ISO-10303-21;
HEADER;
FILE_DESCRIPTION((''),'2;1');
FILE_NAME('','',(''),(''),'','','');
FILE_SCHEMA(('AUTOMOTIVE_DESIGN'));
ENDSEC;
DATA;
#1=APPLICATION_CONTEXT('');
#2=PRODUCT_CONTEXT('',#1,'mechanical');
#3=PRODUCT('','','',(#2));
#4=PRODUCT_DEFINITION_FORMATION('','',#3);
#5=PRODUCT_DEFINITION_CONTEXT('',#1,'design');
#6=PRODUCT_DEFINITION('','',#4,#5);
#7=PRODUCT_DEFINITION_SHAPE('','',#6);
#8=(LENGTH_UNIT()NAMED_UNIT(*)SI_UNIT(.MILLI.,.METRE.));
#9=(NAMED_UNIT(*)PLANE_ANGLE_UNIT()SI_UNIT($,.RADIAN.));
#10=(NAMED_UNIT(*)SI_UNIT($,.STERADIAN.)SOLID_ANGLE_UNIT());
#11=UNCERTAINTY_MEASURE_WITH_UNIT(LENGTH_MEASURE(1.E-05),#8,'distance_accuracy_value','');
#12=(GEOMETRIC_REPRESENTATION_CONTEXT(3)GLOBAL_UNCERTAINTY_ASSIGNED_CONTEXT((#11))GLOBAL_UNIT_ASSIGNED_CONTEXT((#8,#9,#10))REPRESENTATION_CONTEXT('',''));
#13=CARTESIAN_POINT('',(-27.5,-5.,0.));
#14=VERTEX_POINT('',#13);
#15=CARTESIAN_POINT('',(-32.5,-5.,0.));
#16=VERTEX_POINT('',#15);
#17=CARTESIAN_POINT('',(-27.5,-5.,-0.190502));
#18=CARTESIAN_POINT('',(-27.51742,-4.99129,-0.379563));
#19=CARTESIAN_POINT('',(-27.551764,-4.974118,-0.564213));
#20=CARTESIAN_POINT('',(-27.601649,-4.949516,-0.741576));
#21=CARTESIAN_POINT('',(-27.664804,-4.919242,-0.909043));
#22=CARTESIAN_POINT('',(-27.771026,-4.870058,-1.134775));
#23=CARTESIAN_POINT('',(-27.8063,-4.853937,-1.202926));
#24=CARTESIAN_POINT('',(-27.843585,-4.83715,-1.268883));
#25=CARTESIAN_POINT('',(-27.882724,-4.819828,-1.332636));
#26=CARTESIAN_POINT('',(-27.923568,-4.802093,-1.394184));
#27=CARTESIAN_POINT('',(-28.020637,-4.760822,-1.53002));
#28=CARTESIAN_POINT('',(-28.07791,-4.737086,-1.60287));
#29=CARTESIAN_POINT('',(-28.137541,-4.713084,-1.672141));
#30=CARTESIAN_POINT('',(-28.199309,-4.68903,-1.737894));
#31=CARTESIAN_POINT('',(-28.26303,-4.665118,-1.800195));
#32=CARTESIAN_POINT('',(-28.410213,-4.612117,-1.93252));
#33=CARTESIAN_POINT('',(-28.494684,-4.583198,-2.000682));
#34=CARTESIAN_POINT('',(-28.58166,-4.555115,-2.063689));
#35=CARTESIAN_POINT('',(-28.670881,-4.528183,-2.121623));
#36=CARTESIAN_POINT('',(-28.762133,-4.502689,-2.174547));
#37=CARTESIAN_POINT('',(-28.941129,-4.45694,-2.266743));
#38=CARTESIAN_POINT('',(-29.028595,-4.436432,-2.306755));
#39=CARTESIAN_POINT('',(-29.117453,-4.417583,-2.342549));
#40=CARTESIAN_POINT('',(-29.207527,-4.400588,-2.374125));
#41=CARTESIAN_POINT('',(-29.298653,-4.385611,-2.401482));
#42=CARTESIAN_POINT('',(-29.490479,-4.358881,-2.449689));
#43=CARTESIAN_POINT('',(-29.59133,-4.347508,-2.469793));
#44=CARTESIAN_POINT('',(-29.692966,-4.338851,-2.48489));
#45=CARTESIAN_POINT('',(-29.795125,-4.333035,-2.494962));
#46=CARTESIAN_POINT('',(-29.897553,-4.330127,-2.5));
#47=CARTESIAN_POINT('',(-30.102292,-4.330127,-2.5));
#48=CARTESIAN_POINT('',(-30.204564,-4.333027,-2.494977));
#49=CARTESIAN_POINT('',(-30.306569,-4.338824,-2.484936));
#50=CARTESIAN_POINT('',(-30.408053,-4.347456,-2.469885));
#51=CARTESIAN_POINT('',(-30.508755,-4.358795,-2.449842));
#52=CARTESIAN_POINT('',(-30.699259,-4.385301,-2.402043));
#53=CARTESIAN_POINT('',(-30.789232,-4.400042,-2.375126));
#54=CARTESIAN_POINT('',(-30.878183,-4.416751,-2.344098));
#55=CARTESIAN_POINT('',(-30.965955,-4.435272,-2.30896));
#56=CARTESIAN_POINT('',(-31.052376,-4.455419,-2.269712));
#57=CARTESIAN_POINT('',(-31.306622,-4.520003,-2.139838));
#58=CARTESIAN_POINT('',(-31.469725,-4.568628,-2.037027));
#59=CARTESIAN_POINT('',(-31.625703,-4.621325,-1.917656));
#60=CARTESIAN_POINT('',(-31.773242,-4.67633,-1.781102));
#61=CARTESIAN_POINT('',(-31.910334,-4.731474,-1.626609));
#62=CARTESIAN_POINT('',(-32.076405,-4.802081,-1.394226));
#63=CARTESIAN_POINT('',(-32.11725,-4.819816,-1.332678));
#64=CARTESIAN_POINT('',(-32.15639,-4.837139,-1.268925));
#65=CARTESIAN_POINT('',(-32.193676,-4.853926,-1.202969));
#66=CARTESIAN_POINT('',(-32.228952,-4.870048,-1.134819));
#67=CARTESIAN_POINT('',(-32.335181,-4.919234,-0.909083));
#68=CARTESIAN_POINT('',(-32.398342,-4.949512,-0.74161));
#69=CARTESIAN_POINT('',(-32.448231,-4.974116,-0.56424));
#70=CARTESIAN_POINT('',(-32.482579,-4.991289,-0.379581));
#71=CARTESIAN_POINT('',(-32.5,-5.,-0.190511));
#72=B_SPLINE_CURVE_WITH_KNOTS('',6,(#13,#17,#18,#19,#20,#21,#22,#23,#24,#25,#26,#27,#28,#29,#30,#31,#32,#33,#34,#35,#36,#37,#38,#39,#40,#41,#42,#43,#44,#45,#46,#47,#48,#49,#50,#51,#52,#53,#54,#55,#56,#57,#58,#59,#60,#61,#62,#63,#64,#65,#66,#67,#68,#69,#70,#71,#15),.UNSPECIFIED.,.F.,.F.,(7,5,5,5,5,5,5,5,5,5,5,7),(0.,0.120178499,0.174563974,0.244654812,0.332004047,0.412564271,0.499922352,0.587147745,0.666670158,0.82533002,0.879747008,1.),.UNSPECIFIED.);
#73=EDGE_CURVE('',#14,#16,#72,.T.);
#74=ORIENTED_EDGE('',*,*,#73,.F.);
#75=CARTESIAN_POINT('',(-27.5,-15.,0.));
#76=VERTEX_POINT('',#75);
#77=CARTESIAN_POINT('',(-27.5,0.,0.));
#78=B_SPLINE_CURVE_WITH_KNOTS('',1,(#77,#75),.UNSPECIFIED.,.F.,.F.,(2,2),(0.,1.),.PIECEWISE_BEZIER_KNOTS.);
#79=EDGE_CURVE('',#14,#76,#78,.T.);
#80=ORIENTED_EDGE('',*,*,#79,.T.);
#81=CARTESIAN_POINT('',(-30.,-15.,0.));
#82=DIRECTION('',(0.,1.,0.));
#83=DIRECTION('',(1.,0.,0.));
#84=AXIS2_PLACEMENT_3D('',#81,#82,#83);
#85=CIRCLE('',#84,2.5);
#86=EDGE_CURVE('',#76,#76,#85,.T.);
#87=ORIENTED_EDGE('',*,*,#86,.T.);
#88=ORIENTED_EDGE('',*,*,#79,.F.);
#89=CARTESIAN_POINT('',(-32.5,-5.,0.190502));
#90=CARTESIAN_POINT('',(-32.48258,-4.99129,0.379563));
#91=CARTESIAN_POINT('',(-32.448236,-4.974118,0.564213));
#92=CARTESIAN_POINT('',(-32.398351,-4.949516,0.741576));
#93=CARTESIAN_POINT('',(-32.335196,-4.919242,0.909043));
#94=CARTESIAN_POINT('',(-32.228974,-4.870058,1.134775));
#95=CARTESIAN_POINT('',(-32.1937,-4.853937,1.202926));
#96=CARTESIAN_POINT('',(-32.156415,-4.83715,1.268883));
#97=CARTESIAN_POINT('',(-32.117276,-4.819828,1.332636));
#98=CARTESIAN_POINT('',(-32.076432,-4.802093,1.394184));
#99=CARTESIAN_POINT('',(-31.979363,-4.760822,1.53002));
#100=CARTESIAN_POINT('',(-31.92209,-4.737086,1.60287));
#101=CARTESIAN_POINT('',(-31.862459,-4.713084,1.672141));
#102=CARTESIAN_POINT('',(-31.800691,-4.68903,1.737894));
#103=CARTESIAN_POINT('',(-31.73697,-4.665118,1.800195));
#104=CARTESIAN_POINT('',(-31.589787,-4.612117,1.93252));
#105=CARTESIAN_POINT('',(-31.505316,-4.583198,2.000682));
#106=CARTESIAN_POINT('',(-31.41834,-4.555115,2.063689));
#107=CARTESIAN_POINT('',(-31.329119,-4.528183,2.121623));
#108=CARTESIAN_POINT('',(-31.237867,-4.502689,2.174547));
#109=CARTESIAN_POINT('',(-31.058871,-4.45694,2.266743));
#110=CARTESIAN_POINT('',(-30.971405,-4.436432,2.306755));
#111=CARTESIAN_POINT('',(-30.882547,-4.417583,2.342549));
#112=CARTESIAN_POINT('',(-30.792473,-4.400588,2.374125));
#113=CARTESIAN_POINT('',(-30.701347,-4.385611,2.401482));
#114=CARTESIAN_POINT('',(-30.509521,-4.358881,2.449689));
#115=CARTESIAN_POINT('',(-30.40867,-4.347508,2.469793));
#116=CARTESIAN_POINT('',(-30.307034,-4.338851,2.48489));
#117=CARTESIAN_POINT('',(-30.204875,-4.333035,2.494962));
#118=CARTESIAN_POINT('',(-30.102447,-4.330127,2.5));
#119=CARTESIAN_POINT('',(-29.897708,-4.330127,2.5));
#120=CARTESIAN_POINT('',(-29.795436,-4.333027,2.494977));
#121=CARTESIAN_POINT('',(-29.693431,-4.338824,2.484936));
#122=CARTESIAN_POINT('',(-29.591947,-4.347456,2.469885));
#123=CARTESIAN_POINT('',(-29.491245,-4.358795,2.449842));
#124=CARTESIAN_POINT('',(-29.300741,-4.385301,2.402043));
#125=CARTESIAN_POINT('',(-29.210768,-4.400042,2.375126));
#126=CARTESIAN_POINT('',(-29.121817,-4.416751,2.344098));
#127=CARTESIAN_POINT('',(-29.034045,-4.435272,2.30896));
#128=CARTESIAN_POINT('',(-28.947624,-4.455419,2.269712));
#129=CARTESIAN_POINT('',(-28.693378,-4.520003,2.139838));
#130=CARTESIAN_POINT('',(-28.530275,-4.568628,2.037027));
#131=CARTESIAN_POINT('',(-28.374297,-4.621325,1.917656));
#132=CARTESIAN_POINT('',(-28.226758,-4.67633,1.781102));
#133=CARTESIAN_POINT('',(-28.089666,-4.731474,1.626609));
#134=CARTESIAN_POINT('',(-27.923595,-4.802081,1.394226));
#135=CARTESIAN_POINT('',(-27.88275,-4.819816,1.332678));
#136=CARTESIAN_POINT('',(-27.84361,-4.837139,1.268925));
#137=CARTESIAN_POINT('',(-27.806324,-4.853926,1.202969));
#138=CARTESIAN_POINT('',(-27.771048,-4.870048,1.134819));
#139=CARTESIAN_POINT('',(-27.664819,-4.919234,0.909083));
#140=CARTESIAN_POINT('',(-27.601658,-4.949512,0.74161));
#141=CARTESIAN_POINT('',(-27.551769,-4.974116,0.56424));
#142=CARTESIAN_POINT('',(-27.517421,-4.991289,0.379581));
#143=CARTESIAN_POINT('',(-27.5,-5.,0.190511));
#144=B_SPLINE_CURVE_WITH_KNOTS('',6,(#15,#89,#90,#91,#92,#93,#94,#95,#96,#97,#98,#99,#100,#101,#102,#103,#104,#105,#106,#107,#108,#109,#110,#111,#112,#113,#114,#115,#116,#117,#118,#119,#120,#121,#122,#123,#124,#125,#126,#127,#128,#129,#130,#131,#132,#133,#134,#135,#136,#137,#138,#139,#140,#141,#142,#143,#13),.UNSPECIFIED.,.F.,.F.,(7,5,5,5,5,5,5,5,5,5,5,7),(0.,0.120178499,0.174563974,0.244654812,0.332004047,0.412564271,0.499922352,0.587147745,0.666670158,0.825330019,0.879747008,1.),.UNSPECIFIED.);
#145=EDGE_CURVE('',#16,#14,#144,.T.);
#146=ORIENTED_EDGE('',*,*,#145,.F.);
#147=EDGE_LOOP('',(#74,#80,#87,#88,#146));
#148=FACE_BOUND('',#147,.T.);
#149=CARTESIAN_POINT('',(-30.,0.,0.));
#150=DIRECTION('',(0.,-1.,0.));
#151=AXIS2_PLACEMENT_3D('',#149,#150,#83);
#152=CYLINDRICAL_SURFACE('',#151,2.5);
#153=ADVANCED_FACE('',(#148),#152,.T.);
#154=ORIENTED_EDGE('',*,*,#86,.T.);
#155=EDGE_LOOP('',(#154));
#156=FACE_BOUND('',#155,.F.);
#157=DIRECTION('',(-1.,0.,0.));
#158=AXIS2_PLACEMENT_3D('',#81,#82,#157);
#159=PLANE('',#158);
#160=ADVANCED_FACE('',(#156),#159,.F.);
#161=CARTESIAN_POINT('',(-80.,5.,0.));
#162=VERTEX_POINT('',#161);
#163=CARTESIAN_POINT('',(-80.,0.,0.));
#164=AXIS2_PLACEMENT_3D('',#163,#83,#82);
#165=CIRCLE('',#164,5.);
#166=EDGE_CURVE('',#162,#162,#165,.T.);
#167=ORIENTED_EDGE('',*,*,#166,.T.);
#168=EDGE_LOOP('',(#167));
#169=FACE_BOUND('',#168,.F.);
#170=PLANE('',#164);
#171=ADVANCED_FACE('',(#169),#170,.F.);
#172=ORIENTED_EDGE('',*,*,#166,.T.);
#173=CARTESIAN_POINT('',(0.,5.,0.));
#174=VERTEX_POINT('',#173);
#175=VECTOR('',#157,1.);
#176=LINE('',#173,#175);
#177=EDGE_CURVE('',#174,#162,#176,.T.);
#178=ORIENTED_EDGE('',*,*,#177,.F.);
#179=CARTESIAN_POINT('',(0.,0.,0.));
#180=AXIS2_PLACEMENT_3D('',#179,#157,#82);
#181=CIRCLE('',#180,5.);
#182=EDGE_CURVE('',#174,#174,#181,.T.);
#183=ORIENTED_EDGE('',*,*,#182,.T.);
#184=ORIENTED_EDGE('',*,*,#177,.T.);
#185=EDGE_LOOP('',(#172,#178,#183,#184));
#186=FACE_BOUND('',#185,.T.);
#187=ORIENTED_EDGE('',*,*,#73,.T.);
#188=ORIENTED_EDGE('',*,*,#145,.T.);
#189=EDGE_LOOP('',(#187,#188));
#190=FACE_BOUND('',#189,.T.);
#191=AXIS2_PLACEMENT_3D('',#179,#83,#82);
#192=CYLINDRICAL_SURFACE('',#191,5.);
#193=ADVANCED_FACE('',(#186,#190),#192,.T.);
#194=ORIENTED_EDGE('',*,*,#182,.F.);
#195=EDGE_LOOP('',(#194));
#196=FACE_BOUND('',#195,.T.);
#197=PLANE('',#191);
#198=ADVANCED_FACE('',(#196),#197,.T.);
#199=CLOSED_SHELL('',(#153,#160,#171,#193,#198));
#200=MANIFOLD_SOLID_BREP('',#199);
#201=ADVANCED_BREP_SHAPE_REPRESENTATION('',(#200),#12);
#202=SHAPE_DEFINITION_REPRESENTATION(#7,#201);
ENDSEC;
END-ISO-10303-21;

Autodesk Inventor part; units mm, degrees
ref_plane "YZ Plane" through (0, 0, 0) normal (1, 0, 0) x (0, 1, 0)
ref_plane "XZ Plane" through (0, 0, 0) normal (0, 1, 0) x (-1, 0, 0)
sketch "цилиндр_конец1" plane through (0, 0, 0) normal (1, 0, 0) x (0, 1, 0)
  line L0 (5, 0) -> (-5, 0)
  line L1 (0, 5) -> (0, -5)
  circle A0 centre (0, 0) radius 5
  dimension "diametr" = 10
extrude "Выдавливание1" add sketch "цилиндр_конец1" against normal blind 80
sketch "цилиндр_конец2" plane through (-80, 0, 0) normal (-1, 0, 0) x (0, 0, 1)
  circle A0 centre (0, 0) radius 5 projected
ref_plane "РабПлоскость7" through (0, 0, 0) normal (0, 1, 0) x (-1, 0, 0)
ref_plane "РабПлоскость8" through (0, 0, 0) normal (0, 0, -1) x (-1, 0, 0)
sketch "ручка_конец1" plane through (0, 0, 0) normal (0, 1, 0) x (-1, 0, 0)
  line L0 (0, 5) -> (0, -5) projected
  line L1 (80, -5) -> (80, 5) projected
  circle A0 centre (30, 0) radius 2.5
  line L2 (-50, 0) -> (300, 0) projected
  point P0 (0, 0)
  dimension "d43" = 5
  dimension "d44" = 30
ref_plane "РабПлоскость9" through (0, -15, 0) normal (0, 1, 0) x (-1, 0, 0)
sketch "ручка_конец2" plane through (0, -15, 0) normal (0, 1, 0) x (-1, 0, 0)
  circle A0 centre (30, 0) radius 2.5
  point P0 (0, 0)
  dimension "diametr_ruchka" = 5
loft "Лофт1" add profiles "ручка_конец1", "ручка_конец2"
equation "\"diametr\" = diametr_"
equation "\"d1\" = length"
equation "\"d43\" = diametr_ruchka_"
equation "\"diametr_ruchka\" = diametr_ruchka_"
equation "\"d45\" = -1.5 * diametr_"
equation "\"diametr_\" = 10"
equation "\"diametr_ruchka_\" = 0.5 * diametr_"
equation "\"length\" = 80"
properties part number "lw_5_цилиндр" material "Дерево (дуб)"
